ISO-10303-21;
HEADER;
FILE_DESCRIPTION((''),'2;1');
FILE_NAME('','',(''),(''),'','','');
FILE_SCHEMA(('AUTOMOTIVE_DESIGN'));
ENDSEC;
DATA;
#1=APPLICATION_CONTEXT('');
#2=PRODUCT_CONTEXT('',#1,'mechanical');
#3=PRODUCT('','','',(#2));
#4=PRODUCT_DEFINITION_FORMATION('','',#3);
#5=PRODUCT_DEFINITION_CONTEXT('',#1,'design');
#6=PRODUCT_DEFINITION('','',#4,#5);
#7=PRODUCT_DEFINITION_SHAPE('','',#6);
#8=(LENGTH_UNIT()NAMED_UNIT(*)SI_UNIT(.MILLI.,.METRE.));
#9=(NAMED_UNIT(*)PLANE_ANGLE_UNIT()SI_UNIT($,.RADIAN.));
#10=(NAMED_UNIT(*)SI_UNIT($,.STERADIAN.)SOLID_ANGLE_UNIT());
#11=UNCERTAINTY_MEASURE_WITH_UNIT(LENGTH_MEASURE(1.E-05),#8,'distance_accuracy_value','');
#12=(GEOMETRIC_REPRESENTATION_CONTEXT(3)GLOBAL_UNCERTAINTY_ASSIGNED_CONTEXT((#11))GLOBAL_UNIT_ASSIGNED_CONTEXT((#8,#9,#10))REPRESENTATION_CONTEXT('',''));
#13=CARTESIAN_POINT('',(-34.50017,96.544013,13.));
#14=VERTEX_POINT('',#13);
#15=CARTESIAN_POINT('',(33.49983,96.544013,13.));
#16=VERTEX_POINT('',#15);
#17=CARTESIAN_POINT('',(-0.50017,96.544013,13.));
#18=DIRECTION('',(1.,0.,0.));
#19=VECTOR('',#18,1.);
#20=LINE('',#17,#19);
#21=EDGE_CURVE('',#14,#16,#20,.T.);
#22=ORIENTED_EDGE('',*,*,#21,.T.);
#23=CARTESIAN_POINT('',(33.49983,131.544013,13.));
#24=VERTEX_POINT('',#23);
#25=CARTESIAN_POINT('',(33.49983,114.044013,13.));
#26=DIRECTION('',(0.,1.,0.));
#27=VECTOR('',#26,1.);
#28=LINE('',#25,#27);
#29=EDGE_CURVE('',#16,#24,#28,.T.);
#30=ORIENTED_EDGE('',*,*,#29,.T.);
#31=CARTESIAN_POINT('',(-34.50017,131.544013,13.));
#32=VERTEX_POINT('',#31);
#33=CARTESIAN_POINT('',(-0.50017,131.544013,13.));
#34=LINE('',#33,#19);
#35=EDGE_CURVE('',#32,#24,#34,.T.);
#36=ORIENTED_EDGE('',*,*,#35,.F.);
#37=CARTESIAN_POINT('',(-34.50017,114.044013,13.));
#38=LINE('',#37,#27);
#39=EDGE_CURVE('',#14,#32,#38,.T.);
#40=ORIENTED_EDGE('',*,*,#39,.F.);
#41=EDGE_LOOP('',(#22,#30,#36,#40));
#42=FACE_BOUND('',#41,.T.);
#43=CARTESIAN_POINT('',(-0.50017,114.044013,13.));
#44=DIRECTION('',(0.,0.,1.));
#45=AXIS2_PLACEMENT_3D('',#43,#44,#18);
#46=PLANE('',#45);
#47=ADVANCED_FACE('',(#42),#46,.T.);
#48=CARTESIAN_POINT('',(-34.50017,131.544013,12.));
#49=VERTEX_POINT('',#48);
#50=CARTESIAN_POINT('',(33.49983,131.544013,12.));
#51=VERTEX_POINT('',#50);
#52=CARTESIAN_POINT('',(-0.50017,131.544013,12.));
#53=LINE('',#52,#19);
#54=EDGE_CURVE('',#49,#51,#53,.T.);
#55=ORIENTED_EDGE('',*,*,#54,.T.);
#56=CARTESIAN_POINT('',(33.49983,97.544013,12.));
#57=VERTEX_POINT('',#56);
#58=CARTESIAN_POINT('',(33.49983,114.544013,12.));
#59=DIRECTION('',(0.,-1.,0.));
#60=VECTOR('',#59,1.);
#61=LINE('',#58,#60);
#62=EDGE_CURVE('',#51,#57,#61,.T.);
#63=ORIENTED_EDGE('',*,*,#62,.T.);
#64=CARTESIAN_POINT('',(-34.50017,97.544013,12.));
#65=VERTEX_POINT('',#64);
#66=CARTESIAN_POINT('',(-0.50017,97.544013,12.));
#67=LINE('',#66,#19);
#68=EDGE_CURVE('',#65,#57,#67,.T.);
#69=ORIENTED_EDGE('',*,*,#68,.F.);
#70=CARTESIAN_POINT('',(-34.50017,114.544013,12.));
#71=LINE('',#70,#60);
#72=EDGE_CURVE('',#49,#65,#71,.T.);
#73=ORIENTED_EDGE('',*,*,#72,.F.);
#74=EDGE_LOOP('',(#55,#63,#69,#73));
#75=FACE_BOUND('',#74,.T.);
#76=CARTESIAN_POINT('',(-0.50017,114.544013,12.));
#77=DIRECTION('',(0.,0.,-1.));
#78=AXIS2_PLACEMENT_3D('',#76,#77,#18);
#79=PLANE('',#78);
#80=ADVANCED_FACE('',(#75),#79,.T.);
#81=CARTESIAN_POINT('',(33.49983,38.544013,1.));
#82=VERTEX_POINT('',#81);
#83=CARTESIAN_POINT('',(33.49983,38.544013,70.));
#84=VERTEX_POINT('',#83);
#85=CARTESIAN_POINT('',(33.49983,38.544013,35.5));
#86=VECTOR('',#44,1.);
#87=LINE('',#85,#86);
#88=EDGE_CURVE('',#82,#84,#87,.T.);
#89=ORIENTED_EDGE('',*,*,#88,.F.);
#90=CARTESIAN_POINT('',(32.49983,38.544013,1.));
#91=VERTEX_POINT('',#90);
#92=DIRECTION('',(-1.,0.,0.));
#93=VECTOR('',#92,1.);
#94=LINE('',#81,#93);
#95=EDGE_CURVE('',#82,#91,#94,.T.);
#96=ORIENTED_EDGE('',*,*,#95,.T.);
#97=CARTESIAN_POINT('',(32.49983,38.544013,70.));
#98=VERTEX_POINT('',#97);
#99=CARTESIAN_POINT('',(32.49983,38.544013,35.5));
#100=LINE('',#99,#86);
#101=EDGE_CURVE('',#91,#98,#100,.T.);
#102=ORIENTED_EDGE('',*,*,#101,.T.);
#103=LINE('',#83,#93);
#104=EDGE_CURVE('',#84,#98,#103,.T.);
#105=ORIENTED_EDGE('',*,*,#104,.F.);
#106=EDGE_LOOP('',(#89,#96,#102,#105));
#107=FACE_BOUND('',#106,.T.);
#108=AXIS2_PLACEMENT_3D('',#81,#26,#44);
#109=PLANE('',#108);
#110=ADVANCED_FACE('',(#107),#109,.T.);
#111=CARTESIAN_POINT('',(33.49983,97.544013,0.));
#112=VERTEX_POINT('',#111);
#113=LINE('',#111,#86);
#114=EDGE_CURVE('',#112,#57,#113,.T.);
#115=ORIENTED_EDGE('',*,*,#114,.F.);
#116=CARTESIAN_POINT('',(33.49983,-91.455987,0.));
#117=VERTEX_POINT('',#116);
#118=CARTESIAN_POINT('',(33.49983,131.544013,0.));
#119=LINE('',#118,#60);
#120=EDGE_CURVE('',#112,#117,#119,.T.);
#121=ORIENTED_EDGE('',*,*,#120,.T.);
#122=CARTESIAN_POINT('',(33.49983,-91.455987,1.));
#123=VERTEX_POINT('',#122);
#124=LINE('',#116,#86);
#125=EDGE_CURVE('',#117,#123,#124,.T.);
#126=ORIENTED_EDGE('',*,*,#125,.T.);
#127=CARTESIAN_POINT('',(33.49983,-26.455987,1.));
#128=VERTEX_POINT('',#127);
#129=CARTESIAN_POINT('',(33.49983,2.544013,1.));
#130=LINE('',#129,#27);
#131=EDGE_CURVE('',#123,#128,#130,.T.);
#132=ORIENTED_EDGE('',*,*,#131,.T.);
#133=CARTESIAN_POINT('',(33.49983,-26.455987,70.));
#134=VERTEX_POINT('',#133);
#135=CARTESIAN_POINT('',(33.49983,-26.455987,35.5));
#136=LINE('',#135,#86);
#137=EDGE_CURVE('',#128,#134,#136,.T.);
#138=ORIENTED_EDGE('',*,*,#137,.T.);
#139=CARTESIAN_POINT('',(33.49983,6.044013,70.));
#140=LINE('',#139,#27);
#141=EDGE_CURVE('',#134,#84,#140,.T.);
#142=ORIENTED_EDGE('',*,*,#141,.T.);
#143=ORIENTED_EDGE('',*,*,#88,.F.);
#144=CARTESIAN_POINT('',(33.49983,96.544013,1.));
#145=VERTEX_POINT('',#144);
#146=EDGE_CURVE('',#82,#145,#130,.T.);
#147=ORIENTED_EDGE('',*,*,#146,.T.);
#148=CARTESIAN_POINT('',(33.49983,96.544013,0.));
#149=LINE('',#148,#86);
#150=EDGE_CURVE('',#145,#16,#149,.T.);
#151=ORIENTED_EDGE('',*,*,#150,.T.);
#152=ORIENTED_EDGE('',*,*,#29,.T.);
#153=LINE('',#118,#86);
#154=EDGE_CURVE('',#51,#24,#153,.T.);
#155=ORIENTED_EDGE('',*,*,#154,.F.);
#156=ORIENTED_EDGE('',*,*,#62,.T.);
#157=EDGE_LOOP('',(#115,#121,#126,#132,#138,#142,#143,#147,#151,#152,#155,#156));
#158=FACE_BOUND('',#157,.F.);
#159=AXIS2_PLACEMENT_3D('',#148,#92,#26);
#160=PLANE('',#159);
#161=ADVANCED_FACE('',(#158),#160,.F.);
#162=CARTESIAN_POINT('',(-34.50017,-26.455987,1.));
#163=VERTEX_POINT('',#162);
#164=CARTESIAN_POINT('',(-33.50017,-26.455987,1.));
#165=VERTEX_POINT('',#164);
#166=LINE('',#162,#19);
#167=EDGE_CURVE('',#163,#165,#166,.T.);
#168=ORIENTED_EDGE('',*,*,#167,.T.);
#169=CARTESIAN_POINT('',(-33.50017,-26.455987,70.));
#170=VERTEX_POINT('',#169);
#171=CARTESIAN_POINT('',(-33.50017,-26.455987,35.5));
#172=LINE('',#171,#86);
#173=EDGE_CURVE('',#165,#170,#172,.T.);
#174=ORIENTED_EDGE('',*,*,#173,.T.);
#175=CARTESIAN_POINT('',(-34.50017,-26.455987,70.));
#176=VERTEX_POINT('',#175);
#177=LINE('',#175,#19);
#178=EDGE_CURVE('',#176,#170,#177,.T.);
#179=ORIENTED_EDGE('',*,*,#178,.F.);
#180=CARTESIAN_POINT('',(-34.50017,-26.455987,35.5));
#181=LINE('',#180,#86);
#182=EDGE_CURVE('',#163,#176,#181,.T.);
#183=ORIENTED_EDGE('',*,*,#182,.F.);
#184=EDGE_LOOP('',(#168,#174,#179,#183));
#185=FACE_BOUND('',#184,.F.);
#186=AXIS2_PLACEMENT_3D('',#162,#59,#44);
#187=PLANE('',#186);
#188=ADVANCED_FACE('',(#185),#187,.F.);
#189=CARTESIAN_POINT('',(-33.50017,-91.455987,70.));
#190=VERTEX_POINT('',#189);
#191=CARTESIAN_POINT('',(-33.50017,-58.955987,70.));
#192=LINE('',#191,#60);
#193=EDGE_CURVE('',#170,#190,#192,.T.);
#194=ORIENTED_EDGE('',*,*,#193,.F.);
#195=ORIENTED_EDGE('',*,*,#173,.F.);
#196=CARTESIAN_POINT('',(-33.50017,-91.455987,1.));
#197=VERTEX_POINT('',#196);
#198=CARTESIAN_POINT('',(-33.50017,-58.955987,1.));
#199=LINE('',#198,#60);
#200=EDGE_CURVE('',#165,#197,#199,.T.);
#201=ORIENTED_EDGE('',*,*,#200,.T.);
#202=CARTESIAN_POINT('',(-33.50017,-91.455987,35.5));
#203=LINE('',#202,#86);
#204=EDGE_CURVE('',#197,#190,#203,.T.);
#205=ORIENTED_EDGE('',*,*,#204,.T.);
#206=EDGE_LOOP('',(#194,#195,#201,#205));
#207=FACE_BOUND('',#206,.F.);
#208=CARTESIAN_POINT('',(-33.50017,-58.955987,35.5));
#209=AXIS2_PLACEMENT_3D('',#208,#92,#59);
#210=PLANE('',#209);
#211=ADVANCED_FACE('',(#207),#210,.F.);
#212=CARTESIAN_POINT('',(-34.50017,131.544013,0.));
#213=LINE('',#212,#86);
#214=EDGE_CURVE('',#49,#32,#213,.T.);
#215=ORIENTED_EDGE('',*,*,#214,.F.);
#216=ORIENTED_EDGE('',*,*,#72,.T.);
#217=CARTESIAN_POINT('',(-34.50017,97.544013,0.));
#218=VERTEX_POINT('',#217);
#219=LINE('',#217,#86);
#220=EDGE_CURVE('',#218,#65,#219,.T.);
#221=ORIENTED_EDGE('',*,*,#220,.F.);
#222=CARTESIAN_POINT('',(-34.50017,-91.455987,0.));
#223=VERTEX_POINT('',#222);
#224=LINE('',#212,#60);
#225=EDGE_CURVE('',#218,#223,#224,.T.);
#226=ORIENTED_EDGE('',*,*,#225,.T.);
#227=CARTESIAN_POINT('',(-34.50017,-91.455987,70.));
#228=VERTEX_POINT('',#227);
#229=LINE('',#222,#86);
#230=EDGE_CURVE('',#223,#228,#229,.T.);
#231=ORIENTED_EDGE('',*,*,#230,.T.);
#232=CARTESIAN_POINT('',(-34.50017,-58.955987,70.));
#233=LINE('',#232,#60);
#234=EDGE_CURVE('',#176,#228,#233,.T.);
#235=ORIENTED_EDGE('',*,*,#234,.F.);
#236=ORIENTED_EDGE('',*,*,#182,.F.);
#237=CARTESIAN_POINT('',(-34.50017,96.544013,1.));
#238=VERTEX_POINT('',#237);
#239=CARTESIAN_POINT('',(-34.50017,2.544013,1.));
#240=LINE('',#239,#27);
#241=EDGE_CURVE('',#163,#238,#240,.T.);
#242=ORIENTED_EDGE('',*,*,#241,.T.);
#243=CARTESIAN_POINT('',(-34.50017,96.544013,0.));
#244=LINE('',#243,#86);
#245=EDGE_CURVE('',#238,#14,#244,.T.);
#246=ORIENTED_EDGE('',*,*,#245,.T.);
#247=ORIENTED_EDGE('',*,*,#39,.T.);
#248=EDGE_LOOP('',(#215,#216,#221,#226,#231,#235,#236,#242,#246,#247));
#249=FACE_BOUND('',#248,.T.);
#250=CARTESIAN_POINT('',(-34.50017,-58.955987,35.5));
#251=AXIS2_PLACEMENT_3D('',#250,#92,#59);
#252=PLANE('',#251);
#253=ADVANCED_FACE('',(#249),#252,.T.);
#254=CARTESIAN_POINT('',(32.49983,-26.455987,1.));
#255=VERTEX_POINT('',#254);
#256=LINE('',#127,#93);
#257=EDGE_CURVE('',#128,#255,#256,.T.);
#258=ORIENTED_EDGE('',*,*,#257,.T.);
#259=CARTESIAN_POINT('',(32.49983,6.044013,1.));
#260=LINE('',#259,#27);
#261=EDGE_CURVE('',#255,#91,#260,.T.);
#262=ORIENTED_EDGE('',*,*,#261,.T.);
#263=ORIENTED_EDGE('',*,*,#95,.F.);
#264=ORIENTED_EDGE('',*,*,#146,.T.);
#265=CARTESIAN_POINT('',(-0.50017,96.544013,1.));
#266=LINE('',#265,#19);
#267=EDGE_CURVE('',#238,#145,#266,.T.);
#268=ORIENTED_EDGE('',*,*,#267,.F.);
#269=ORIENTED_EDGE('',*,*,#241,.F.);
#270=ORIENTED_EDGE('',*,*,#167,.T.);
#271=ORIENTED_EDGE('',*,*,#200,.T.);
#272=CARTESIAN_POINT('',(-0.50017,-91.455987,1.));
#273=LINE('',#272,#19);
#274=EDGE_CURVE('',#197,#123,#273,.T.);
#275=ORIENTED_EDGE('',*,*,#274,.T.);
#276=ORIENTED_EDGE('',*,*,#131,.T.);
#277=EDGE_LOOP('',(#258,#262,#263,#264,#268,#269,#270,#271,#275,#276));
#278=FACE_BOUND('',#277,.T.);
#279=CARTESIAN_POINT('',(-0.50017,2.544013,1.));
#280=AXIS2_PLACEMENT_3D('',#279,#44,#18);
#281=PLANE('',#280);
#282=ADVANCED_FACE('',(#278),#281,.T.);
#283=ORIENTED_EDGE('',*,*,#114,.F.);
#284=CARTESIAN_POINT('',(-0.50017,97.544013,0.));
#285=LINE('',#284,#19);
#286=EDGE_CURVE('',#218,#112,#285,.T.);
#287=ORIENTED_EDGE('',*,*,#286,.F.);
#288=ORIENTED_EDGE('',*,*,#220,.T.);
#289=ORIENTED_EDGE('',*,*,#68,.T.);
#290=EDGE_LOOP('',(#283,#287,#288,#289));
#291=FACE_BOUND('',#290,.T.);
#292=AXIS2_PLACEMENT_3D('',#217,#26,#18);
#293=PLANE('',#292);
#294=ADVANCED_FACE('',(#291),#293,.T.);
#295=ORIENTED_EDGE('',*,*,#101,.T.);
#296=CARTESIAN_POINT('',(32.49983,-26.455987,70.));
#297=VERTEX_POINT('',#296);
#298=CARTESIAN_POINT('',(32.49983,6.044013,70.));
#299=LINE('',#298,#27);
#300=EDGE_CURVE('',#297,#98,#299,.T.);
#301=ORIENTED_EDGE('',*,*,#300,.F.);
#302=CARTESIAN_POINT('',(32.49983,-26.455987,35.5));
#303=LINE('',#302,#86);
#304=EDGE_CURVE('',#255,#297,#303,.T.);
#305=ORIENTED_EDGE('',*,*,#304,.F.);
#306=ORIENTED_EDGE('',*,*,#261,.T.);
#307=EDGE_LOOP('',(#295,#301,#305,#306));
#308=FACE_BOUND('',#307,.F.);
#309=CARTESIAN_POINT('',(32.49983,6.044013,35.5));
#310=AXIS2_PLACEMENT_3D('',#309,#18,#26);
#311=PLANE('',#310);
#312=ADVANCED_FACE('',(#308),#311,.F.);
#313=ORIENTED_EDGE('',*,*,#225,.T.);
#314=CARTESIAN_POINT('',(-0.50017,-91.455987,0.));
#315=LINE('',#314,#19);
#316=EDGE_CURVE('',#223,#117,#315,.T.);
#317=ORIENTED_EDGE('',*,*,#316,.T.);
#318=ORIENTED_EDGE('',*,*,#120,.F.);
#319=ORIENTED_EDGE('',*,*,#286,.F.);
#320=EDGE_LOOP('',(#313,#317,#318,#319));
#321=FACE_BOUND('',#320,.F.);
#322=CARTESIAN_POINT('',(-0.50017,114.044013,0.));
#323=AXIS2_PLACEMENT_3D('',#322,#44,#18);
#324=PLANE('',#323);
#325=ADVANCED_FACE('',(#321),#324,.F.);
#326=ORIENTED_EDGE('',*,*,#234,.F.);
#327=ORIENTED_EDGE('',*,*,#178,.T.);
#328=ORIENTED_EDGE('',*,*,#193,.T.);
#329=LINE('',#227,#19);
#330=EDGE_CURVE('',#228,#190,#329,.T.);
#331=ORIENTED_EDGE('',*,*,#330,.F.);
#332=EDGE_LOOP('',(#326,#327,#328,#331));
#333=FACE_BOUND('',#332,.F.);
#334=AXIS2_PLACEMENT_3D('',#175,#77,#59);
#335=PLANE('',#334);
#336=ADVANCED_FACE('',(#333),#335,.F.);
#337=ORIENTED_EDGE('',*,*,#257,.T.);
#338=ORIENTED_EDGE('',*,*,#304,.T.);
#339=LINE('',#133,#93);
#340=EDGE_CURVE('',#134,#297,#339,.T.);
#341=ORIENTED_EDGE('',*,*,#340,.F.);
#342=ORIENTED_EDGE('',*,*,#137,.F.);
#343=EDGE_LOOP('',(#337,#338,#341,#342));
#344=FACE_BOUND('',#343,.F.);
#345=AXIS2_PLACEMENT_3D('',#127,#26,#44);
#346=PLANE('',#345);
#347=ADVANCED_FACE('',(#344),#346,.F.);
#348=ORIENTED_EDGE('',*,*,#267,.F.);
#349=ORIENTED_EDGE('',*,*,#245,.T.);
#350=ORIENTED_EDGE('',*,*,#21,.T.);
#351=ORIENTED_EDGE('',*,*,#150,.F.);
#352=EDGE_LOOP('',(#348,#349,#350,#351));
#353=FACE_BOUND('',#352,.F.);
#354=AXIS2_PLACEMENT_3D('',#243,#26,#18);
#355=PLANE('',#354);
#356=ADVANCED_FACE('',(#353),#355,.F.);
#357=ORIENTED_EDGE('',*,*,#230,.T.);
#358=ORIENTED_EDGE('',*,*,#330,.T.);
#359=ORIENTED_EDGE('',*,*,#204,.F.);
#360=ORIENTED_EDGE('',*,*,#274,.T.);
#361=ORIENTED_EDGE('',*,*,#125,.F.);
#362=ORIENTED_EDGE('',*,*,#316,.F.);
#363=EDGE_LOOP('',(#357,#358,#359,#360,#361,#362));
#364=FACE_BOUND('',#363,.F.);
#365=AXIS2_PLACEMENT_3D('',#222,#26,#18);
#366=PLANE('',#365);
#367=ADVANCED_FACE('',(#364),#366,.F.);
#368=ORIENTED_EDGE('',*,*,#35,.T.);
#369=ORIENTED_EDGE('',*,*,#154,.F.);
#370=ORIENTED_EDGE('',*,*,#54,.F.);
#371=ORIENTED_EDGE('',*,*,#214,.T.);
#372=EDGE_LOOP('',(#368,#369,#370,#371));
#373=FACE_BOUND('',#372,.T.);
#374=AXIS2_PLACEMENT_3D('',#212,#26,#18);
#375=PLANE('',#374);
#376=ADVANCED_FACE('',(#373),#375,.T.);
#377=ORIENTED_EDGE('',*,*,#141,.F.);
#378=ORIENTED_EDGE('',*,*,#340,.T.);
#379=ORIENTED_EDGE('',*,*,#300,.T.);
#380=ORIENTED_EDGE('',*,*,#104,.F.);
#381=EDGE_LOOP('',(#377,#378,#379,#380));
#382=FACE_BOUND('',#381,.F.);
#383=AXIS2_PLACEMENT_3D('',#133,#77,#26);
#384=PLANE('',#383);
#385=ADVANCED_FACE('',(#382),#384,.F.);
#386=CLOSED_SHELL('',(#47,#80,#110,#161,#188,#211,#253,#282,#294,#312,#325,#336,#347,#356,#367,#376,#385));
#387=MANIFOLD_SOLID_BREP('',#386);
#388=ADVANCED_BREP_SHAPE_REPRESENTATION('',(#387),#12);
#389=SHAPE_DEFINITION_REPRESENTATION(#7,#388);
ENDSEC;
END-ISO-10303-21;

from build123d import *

# Parameters (mm, degrees)
F0_W     = 68
F0_H     = 188
F1_DEPTH = 1
F0_H_2   = 35
F2_DEPTH = 13
F3_W     = 68
F3_H     = 34
F4_DEPTH = 12
F5_W     = 65
F5_H     = 69
F6_DEPTH = 1
F7_W     = 65
F7_H     = 69
F8_DEPTH = 1


# Not quite as in the source:
# - a feature names something its author has since deleted; it is built from what else it names


with BuildPart() as f1:
    # F0 (on Top) → F1 (new body)
    with BuildSketch(Plane.XY):
        with Locations((145.9408301511, 2.5440129265)):
            Rectangle(F0_W, F0_H)
    extrude(amount=F1_DEPTH)

    # F0 (on Top) → F2 (join)
    with BuildSketch(Plane.XY):
        with Locations((145.9408301511, 114.0440129265)):
            Rectangle(F0_W, F0_H_2)
    extrude(amount=F2_DEPTH)

    # F3 (on face) → F4 (cut)
    with BuildSketch(Plane(origin=(0, 0, 0), x_dir=(1, 0, 0), z_dir=(0, 0, -1))):
        with Locations((145.9408301511, -114.5440129265)):
            Rectangle(F3_W, F3_H)
    extrude(amount=-F4_DEPTH, mode=Mode.SUBTRACT)

    # F5 (on face) → F6 (join)
    with BuildSketch(Plane.YZ.offset(179.9408301511)):
        with Locations((6.0440129265, 35.5)):
            Rectangle(F5_W, F5_H)
    extrude(amount=-F6_DEPTH)

    # F7 (on face) → F8 (join)
    with BuildSketch(Plane(origin=(111.9408301511, 0, 0), x_dir=(0, -1, 0), z_dir=(-1, 0, 0))):
        with Locations((58.9559870735, 35.5)):
            Rectangle(F7_W, F7_H)
    extrude(amount=-F8_DEPTH)


with BuildPart() as f1_1:
    # F9: moved
    add(f1.part.moved(Location((-146.441, 0, 0))))


solid = f1_1.part
